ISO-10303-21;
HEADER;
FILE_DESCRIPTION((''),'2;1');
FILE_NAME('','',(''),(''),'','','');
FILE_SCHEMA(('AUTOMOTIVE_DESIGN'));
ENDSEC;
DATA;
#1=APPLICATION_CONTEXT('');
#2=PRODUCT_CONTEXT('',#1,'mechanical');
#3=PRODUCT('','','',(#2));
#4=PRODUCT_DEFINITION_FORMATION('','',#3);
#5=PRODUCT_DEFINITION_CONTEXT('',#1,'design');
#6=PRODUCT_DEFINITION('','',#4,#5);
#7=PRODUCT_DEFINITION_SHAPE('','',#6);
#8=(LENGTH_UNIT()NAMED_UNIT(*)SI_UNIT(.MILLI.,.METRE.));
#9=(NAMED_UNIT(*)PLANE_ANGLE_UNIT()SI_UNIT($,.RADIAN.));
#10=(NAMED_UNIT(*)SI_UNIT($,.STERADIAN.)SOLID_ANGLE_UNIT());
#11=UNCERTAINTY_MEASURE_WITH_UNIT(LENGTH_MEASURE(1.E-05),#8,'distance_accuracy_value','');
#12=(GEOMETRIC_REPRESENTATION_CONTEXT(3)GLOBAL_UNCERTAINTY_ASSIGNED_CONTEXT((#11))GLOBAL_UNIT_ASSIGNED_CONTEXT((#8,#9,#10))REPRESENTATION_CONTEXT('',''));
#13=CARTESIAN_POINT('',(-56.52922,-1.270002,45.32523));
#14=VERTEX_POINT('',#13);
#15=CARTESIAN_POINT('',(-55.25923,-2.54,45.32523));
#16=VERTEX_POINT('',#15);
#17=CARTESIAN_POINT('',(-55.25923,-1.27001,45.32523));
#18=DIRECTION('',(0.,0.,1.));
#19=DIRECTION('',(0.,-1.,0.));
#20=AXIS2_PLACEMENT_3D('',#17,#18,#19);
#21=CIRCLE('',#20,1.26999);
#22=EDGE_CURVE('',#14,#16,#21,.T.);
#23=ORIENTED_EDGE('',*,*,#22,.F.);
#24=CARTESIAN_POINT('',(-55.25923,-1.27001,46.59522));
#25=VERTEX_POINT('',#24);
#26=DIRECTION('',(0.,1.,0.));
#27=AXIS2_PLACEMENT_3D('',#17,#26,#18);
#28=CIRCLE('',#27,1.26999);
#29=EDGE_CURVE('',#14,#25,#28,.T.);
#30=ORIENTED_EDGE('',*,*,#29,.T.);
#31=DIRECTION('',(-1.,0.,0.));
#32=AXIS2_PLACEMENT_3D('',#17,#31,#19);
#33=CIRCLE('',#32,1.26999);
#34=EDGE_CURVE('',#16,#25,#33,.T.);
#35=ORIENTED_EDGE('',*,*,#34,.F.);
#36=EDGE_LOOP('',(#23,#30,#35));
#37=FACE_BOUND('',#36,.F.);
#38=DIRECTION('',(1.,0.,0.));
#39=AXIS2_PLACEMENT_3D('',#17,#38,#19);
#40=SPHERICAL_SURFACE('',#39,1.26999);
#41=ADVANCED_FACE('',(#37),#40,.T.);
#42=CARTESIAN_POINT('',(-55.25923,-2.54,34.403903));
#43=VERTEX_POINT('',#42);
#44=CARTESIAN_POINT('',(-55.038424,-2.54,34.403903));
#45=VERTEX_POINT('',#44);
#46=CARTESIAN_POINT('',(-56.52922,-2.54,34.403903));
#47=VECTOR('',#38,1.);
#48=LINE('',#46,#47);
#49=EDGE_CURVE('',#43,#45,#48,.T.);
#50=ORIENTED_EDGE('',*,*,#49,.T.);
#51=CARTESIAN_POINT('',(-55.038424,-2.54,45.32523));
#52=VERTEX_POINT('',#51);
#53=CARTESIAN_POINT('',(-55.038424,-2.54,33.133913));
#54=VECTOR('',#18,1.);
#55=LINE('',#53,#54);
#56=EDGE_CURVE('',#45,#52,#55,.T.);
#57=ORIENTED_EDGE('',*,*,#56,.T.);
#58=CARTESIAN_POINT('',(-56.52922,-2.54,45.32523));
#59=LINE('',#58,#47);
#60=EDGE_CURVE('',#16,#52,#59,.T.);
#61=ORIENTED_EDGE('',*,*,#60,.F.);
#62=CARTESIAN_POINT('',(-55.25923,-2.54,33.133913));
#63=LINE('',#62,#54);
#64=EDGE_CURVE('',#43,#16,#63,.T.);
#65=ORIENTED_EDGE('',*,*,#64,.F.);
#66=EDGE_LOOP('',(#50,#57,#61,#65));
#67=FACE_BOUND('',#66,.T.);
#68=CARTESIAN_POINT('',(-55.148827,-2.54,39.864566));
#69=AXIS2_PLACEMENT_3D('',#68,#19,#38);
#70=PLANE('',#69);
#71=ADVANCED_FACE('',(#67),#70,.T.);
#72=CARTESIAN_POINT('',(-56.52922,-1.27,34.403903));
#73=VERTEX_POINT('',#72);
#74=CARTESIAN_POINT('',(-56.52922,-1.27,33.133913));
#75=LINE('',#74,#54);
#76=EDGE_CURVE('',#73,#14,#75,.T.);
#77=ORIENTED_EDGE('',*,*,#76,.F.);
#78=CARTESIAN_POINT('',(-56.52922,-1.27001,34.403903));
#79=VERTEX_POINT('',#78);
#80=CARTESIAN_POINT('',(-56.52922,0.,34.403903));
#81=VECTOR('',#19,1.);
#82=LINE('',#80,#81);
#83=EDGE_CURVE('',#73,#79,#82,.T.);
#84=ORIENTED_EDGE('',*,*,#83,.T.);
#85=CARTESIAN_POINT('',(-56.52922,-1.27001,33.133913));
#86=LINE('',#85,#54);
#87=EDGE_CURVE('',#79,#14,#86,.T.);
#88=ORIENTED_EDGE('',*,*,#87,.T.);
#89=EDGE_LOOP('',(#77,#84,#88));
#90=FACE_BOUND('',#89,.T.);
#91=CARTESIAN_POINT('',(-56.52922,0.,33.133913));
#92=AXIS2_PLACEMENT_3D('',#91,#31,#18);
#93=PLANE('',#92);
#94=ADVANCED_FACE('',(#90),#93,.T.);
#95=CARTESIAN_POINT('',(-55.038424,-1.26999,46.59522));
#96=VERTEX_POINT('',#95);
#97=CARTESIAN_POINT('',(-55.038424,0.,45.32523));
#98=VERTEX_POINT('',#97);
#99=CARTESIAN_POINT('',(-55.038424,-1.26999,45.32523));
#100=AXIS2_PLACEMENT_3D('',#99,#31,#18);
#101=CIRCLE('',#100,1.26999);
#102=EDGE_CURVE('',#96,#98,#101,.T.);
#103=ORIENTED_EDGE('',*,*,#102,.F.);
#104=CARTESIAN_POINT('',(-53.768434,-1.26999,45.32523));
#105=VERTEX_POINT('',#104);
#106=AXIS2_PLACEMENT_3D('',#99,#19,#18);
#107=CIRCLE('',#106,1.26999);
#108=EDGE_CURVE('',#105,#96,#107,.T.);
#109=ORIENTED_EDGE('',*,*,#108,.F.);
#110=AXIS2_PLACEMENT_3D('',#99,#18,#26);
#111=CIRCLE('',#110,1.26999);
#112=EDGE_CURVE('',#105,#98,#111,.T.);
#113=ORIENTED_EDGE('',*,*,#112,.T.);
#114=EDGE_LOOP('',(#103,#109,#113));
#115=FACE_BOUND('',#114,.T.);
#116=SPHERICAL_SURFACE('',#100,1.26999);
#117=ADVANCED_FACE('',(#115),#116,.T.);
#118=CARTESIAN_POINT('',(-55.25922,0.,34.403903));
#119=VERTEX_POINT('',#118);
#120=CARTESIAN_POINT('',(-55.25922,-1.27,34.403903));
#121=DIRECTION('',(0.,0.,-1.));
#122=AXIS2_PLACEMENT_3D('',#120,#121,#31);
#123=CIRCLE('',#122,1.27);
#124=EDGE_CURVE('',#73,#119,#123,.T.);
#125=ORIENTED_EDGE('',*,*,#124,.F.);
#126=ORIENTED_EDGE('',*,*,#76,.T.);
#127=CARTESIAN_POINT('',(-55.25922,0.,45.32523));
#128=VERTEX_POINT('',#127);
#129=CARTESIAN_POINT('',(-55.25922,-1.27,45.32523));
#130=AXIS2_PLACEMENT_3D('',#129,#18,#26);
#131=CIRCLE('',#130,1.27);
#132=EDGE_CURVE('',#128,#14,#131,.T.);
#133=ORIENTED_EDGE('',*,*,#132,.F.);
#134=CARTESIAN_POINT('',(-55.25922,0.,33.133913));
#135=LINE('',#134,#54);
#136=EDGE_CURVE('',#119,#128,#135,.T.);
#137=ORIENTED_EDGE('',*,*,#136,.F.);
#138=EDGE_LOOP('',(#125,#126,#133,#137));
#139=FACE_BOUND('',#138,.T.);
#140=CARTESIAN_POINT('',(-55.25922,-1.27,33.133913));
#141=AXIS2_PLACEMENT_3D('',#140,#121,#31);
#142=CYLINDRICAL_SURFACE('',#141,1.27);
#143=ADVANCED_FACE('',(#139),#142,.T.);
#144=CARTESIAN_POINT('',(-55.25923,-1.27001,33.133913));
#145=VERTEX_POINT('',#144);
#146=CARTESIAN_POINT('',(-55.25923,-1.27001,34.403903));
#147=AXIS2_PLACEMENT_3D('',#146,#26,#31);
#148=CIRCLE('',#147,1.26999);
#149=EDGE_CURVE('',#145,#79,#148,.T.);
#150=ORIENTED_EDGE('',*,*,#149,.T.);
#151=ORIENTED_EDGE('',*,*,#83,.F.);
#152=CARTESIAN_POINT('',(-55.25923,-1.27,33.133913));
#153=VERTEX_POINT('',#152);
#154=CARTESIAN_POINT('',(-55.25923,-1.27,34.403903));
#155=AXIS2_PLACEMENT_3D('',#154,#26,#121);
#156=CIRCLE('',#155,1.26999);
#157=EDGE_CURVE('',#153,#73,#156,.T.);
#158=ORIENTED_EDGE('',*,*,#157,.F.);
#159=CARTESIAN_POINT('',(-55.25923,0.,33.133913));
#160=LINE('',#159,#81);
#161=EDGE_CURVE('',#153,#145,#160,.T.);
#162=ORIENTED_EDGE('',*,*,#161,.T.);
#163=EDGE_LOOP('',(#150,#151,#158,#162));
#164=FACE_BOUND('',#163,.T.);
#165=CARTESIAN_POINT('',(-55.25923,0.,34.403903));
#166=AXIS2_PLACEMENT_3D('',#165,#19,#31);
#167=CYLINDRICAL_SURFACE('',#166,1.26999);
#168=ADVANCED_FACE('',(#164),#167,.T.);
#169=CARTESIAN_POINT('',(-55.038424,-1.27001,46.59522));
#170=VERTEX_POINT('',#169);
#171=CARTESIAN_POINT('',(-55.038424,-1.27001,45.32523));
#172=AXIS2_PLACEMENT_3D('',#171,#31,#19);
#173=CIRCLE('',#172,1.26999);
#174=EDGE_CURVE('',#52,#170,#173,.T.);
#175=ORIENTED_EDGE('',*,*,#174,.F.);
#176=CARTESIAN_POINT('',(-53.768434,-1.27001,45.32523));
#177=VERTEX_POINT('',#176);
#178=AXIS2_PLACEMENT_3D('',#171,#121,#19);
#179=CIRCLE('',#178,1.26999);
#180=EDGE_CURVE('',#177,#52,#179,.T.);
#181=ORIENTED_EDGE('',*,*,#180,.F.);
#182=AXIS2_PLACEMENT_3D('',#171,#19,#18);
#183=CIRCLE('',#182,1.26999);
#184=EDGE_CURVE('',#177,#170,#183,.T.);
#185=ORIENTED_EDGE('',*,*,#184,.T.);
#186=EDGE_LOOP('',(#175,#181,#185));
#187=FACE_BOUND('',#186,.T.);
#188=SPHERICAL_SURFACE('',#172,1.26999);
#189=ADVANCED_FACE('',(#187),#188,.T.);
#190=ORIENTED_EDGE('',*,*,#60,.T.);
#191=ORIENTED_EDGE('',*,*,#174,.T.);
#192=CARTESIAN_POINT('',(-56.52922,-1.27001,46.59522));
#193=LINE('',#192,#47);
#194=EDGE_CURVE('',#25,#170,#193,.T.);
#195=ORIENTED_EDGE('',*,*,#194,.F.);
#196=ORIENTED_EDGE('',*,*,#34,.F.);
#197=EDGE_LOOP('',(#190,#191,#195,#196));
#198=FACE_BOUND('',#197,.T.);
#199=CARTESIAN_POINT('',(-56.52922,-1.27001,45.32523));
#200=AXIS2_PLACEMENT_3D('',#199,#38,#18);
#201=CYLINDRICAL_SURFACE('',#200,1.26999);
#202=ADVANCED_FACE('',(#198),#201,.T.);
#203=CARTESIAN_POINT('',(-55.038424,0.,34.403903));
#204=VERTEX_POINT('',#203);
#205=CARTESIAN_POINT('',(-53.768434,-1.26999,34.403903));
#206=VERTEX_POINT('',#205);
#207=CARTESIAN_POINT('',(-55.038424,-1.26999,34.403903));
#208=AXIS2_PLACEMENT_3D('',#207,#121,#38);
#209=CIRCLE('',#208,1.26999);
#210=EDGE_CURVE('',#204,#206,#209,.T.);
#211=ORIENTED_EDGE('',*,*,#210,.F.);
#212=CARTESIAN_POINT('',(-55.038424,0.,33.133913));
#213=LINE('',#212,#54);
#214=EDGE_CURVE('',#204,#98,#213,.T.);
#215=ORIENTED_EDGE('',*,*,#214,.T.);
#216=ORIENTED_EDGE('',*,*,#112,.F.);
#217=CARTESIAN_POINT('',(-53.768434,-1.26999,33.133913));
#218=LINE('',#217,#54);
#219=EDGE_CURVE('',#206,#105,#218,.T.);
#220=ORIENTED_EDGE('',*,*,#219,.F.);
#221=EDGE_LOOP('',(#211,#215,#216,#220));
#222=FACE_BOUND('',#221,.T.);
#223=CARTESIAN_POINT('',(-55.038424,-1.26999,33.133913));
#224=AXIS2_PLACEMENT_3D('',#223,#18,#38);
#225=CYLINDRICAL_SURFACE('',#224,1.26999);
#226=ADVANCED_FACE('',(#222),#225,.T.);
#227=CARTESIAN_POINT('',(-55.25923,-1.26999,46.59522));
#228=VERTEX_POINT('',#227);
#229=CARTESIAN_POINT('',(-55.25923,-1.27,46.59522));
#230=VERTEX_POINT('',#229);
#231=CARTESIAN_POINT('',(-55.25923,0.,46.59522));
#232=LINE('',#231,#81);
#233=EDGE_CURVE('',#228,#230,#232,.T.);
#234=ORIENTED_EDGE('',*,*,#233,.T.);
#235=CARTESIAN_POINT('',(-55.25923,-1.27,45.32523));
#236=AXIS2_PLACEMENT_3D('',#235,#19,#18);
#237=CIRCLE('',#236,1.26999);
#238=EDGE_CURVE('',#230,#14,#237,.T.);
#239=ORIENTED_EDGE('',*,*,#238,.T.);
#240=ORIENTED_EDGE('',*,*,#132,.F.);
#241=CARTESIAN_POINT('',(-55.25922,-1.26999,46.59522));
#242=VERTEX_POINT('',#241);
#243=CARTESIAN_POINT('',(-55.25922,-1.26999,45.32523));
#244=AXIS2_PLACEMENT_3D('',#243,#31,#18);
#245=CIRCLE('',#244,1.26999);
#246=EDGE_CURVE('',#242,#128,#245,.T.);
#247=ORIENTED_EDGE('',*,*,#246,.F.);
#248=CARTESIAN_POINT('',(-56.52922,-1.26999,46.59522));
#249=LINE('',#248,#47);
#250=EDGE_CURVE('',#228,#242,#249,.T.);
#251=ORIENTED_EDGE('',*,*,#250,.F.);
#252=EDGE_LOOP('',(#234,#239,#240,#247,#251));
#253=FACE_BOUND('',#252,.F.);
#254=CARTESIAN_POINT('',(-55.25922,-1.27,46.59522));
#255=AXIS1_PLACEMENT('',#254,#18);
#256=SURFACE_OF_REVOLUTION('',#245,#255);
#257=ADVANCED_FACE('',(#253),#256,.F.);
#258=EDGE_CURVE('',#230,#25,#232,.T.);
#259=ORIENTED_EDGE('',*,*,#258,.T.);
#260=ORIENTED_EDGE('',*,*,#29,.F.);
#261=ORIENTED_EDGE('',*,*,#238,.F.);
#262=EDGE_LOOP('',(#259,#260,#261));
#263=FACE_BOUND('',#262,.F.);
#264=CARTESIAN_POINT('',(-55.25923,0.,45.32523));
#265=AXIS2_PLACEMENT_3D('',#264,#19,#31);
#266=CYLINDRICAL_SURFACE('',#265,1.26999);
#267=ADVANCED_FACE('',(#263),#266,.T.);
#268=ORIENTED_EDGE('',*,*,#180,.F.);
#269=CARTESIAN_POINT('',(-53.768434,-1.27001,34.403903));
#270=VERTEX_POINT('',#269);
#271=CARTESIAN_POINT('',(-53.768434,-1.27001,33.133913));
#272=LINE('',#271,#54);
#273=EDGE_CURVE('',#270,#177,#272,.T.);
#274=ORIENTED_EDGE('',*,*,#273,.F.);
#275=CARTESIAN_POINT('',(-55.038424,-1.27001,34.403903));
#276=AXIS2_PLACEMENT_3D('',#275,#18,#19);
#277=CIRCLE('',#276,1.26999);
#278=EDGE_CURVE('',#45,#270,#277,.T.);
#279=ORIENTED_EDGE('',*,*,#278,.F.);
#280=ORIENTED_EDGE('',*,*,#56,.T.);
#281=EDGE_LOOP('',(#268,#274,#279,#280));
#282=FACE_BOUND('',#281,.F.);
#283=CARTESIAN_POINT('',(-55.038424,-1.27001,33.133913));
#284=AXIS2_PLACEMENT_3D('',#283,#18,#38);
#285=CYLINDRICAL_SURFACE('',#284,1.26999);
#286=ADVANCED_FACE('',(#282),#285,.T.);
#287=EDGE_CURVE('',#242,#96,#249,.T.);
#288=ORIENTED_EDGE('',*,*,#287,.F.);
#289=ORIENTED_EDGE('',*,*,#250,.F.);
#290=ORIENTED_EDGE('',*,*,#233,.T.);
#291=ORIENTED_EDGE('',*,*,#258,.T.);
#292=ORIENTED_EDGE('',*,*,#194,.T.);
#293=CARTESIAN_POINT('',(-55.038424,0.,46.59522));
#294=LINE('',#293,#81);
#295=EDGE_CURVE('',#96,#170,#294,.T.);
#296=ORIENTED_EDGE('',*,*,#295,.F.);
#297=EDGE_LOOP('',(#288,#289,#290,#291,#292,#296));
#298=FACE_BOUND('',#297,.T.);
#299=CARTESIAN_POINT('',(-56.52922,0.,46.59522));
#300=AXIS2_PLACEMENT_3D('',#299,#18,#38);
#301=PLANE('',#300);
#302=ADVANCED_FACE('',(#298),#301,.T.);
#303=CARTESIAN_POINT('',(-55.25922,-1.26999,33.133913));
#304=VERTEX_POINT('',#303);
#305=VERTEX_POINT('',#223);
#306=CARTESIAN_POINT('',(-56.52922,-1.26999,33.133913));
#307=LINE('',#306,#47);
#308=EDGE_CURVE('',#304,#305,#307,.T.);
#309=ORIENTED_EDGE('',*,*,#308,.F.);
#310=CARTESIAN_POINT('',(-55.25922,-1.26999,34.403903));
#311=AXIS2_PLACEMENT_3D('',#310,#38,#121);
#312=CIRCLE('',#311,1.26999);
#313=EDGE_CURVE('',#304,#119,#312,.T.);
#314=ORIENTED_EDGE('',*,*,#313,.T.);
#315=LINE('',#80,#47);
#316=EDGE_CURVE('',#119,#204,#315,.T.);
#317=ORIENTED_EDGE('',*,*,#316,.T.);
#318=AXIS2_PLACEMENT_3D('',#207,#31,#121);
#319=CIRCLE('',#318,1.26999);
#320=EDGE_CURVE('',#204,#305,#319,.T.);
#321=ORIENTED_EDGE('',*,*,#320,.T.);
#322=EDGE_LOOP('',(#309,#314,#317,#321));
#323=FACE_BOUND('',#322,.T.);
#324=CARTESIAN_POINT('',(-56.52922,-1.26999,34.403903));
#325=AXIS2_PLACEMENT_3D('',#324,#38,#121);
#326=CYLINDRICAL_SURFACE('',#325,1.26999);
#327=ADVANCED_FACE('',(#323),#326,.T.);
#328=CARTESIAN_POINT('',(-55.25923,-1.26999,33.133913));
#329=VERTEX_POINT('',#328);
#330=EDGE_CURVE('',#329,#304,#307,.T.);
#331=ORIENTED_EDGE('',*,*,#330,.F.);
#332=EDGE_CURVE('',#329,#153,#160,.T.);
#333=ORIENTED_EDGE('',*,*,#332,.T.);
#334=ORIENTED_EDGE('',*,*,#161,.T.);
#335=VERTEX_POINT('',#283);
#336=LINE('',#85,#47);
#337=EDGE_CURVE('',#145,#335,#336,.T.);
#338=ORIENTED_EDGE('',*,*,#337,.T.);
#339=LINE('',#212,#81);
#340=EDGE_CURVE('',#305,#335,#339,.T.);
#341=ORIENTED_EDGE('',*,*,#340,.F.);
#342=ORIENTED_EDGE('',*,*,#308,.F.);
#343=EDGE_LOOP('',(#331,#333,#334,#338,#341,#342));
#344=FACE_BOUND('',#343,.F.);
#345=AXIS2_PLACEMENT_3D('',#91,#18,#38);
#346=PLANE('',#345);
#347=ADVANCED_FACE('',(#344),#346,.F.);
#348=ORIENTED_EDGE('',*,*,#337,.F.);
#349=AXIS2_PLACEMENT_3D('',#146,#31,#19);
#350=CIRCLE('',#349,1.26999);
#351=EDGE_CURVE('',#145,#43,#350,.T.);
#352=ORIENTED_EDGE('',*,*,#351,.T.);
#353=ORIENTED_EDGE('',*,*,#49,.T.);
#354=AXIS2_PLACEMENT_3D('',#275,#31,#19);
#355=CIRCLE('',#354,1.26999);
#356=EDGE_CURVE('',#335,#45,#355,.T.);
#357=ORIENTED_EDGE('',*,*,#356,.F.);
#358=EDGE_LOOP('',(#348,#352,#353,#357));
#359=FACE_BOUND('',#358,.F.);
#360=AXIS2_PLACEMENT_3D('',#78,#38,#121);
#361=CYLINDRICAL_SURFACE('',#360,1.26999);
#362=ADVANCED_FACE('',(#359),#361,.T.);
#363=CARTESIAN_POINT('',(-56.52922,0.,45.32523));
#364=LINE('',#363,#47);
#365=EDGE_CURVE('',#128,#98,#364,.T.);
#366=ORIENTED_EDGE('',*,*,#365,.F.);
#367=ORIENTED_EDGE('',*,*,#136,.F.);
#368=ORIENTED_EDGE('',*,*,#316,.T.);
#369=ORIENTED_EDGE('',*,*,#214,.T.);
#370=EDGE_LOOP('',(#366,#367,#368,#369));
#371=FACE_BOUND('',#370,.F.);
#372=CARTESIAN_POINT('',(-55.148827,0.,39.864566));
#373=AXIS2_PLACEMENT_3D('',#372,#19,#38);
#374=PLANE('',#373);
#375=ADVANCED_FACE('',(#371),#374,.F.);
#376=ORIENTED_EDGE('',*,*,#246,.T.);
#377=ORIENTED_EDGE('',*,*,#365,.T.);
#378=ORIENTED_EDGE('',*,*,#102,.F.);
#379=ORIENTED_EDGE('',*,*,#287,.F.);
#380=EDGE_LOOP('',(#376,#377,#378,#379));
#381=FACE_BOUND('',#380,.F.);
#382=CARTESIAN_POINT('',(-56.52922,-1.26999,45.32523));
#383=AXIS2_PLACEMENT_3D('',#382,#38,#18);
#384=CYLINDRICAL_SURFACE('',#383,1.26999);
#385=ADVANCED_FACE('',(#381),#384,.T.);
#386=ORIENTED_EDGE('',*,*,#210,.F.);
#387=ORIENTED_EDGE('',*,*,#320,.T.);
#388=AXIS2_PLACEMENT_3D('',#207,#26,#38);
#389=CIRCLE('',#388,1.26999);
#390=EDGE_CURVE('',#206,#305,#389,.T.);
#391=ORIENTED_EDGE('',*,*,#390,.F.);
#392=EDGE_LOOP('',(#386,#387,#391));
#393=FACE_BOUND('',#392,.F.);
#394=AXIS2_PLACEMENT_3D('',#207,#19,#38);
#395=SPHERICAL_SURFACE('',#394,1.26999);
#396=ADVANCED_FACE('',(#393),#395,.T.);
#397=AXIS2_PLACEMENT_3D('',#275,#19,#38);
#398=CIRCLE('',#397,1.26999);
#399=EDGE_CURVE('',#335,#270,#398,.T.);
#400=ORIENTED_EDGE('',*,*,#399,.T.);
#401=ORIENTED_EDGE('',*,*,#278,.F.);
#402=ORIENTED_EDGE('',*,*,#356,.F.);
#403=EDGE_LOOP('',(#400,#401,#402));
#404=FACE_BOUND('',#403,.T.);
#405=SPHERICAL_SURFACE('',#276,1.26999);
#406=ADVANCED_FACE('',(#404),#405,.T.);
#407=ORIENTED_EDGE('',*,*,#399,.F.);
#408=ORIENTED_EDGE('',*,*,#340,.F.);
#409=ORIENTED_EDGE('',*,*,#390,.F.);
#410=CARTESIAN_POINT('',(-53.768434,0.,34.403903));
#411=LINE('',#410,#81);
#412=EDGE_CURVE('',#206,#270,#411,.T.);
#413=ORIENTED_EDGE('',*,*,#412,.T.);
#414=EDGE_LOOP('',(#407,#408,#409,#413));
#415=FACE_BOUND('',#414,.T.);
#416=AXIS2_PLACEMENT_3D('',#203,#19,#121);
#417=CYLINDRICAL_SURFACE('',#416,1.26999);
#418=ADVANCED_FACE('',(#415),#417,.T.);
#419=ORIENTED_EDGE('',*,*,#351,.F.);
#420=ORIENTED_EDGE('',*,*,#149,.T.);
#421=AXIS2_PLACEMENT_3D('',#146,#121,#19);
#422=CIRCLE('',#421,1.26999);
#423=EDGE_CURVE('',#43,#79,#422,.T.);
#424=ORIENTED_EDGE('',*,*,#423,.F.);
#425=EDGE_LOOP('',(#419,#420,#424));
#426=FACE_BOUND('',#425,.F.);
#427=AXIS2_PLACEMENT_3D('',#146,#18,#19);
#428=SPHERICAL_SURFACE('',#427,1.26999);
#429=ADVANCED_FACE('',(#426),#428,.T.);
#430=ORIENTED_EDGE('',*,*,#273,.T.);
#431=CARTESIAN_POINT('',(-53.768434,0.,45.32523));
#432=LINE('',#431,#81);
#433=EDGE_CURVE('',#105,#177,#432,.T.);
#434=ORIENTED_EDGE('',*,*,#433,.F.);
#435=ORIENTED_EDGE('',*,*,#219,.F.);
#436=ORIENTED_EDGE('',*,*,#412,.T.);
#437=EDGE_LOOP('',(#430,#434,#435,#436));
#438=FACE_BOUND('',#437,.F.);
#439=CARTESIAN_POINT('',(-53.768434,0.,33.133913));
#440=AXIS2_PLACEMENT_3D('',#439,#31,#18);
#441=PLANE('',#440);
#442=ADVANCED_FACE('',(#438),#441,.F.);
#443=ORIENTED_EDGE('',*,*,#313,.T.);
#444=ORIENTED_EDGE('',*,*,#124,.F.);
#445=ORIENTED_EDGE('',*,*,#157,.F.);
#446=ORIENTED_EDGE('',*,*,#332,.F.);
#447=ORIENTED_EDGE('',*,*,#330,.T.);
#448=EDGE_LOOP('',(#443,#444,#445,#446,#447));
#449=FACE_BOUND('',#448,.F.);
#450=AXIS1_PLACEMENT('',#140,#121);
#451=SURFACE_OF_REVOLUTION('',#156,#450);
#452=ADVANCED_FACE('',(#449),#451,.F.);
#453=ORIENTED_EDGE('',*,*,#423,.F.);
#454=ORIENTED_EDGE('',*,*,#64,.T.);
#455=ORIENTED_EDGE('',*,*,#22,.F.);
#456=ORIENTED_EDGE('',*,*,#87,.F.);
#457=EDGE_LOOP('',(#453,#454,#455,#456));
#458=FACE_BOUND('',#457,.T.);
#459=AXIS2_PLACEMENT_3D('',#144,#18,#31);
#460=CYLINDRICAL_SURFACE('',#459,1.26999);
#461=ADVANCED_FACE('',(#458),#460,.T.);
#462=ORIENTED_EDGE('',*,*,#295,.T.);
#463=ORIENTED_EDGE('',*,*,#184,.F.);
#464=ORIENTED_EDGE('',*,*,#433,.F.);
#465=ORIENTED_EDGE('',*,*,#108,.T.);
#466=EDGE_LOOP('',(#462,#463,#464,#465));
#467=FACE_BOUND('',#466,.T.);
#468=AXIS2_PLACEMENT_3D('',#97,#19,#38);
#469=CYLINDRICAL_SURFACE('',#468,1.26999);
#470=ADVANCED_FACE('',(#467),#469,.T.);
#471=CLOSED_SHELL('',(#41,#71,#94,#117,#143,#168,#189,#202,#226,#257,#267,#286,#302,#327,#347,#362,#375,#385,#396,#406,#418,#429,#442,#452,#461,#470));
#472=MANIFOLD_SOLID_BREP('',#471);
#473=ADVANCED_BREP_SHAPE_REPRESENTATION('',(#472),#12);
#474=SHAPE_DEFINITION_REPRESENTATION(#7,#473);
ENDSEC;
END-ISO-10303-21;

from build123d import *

# Parameters (mm, degrees)
F0_W        = 2.7607865632
F0_H        = 13.4613066912
F1_DEPTH    = 2.54
F2_R        = 1.26999
F3_T1_DEPTH = 13.4613066912
F3_T4_ANGLE = 90
F3_T6_ANGLE = 90


# Not quite as in the source:
# - a fillet or chamfer that OpenCascade refuses, or shapes differently, is made with other operations: its cross-section is extruded or revolved along the edge and cut away or added
# - a fillet or chamfer is up to 0.001 mm smaller than in the source, because OpenCascade refuses the exact size


with BuildPart() as f1:
    # F0 (on Front) → F1 (new body)
    with BuildSketch(Plane.XZ):
        with Locations((-55.148826912, 39.8645661771)):
            Rectangle(F0_W, F0_H)
    extrude(amount=F1_DEPTH)

    # F2 (radius 1.27 in the source; OpenCascade refuses exactly that, so slightly less here)
    f2_edges = [f1.edges().sort_by_distance(p)[0] for p in [
        (-55.148827, -2.54, 46.59522),
        (-53.768434, -2.54, 39.864566),
        (-56.52922, -2.54, 39.864566),
        (-55.148827, -2.54, 33.133913),
        (-55.148827, 0, 46.59522),
        (-53.768434, -1.27, 46.59522),
        (-53.768434, -1.27, 33.133913),
        (-53.768434, 0, 39.864566),
        (-55.148827, 0, 33.133913),
        (-56.52922, -1.27, 46.59522),
        (-56.52922, -1.27, 33.133913),
    ]]
    fillet(f2_edges, radius=F2_R)

    # F3: fillet of radius 1.27 on 1 edges, made by hand

    # F3_s2 → F3_t1 (cut)
    with BuildSketch(Plane.XY.offset(33.1339128315)):
        with BuildLine():
            ThreePointArc((-56.5292201936, -1.27), (-56.1572458057, -0.3719743879), (-55.2592201936, 0))
            Line((-55.2592201936, 0), (-56.5292201936, 0))
            Line((-56.5292201936, 0), (-56.5292201936, -1.27))
        make_face()
    extrude(amount=F3_T1_DEPTH, mode=Mode.SUBTRACT)

    # F3_s3 → F3_t4 (revolve, cut)
    with BuildSketch(Plane.YZ.offset(-55.2592201936)):
        with BuildLine():
            ThreePointArc((-1.26999, 46.5952195227), (-0.371971459, 46.2232480638), (0, 45.3252295227))
            Line((0, 45.3252295227), (0, 46.5952195227))
            Line((0, 46.5952195227), (-1.26999, 46.5952195227))
        make_face()
    revolve(axis=Axis((-55.2592201936, -1.27, 46.5952195227), (0, 0, 1)), revolution_arc=F3_T4_ANGLE, mode=Mode.SUBTRACT)

    # F3_s5 → F3_t6 (revolve, cut)
    with BuildSketch(Plane.XZ.offset(1.27)):
        with BuildLine():
            ThreePointArc((-55.2592301936, 33.1339128315), (-56.1572487347, 33.5058842905), (-56.5292201936, 34.4039028315))
            Line((-56.5292201936, 34.4039028315), (-56.5292201936, 33.1339128315))
            Line((-56.5292201936, 33.1339128315), (-55.2592301936, 33.1339128315))
        make_face()
    revolve(axis=Axis((-55.2592201936, -1.27, 33.1339128315), (0, 0, -1)), revolution_arc=F3_T6_ANGLE, mode=Mode.SUBTRACT)


solid = f1.part
